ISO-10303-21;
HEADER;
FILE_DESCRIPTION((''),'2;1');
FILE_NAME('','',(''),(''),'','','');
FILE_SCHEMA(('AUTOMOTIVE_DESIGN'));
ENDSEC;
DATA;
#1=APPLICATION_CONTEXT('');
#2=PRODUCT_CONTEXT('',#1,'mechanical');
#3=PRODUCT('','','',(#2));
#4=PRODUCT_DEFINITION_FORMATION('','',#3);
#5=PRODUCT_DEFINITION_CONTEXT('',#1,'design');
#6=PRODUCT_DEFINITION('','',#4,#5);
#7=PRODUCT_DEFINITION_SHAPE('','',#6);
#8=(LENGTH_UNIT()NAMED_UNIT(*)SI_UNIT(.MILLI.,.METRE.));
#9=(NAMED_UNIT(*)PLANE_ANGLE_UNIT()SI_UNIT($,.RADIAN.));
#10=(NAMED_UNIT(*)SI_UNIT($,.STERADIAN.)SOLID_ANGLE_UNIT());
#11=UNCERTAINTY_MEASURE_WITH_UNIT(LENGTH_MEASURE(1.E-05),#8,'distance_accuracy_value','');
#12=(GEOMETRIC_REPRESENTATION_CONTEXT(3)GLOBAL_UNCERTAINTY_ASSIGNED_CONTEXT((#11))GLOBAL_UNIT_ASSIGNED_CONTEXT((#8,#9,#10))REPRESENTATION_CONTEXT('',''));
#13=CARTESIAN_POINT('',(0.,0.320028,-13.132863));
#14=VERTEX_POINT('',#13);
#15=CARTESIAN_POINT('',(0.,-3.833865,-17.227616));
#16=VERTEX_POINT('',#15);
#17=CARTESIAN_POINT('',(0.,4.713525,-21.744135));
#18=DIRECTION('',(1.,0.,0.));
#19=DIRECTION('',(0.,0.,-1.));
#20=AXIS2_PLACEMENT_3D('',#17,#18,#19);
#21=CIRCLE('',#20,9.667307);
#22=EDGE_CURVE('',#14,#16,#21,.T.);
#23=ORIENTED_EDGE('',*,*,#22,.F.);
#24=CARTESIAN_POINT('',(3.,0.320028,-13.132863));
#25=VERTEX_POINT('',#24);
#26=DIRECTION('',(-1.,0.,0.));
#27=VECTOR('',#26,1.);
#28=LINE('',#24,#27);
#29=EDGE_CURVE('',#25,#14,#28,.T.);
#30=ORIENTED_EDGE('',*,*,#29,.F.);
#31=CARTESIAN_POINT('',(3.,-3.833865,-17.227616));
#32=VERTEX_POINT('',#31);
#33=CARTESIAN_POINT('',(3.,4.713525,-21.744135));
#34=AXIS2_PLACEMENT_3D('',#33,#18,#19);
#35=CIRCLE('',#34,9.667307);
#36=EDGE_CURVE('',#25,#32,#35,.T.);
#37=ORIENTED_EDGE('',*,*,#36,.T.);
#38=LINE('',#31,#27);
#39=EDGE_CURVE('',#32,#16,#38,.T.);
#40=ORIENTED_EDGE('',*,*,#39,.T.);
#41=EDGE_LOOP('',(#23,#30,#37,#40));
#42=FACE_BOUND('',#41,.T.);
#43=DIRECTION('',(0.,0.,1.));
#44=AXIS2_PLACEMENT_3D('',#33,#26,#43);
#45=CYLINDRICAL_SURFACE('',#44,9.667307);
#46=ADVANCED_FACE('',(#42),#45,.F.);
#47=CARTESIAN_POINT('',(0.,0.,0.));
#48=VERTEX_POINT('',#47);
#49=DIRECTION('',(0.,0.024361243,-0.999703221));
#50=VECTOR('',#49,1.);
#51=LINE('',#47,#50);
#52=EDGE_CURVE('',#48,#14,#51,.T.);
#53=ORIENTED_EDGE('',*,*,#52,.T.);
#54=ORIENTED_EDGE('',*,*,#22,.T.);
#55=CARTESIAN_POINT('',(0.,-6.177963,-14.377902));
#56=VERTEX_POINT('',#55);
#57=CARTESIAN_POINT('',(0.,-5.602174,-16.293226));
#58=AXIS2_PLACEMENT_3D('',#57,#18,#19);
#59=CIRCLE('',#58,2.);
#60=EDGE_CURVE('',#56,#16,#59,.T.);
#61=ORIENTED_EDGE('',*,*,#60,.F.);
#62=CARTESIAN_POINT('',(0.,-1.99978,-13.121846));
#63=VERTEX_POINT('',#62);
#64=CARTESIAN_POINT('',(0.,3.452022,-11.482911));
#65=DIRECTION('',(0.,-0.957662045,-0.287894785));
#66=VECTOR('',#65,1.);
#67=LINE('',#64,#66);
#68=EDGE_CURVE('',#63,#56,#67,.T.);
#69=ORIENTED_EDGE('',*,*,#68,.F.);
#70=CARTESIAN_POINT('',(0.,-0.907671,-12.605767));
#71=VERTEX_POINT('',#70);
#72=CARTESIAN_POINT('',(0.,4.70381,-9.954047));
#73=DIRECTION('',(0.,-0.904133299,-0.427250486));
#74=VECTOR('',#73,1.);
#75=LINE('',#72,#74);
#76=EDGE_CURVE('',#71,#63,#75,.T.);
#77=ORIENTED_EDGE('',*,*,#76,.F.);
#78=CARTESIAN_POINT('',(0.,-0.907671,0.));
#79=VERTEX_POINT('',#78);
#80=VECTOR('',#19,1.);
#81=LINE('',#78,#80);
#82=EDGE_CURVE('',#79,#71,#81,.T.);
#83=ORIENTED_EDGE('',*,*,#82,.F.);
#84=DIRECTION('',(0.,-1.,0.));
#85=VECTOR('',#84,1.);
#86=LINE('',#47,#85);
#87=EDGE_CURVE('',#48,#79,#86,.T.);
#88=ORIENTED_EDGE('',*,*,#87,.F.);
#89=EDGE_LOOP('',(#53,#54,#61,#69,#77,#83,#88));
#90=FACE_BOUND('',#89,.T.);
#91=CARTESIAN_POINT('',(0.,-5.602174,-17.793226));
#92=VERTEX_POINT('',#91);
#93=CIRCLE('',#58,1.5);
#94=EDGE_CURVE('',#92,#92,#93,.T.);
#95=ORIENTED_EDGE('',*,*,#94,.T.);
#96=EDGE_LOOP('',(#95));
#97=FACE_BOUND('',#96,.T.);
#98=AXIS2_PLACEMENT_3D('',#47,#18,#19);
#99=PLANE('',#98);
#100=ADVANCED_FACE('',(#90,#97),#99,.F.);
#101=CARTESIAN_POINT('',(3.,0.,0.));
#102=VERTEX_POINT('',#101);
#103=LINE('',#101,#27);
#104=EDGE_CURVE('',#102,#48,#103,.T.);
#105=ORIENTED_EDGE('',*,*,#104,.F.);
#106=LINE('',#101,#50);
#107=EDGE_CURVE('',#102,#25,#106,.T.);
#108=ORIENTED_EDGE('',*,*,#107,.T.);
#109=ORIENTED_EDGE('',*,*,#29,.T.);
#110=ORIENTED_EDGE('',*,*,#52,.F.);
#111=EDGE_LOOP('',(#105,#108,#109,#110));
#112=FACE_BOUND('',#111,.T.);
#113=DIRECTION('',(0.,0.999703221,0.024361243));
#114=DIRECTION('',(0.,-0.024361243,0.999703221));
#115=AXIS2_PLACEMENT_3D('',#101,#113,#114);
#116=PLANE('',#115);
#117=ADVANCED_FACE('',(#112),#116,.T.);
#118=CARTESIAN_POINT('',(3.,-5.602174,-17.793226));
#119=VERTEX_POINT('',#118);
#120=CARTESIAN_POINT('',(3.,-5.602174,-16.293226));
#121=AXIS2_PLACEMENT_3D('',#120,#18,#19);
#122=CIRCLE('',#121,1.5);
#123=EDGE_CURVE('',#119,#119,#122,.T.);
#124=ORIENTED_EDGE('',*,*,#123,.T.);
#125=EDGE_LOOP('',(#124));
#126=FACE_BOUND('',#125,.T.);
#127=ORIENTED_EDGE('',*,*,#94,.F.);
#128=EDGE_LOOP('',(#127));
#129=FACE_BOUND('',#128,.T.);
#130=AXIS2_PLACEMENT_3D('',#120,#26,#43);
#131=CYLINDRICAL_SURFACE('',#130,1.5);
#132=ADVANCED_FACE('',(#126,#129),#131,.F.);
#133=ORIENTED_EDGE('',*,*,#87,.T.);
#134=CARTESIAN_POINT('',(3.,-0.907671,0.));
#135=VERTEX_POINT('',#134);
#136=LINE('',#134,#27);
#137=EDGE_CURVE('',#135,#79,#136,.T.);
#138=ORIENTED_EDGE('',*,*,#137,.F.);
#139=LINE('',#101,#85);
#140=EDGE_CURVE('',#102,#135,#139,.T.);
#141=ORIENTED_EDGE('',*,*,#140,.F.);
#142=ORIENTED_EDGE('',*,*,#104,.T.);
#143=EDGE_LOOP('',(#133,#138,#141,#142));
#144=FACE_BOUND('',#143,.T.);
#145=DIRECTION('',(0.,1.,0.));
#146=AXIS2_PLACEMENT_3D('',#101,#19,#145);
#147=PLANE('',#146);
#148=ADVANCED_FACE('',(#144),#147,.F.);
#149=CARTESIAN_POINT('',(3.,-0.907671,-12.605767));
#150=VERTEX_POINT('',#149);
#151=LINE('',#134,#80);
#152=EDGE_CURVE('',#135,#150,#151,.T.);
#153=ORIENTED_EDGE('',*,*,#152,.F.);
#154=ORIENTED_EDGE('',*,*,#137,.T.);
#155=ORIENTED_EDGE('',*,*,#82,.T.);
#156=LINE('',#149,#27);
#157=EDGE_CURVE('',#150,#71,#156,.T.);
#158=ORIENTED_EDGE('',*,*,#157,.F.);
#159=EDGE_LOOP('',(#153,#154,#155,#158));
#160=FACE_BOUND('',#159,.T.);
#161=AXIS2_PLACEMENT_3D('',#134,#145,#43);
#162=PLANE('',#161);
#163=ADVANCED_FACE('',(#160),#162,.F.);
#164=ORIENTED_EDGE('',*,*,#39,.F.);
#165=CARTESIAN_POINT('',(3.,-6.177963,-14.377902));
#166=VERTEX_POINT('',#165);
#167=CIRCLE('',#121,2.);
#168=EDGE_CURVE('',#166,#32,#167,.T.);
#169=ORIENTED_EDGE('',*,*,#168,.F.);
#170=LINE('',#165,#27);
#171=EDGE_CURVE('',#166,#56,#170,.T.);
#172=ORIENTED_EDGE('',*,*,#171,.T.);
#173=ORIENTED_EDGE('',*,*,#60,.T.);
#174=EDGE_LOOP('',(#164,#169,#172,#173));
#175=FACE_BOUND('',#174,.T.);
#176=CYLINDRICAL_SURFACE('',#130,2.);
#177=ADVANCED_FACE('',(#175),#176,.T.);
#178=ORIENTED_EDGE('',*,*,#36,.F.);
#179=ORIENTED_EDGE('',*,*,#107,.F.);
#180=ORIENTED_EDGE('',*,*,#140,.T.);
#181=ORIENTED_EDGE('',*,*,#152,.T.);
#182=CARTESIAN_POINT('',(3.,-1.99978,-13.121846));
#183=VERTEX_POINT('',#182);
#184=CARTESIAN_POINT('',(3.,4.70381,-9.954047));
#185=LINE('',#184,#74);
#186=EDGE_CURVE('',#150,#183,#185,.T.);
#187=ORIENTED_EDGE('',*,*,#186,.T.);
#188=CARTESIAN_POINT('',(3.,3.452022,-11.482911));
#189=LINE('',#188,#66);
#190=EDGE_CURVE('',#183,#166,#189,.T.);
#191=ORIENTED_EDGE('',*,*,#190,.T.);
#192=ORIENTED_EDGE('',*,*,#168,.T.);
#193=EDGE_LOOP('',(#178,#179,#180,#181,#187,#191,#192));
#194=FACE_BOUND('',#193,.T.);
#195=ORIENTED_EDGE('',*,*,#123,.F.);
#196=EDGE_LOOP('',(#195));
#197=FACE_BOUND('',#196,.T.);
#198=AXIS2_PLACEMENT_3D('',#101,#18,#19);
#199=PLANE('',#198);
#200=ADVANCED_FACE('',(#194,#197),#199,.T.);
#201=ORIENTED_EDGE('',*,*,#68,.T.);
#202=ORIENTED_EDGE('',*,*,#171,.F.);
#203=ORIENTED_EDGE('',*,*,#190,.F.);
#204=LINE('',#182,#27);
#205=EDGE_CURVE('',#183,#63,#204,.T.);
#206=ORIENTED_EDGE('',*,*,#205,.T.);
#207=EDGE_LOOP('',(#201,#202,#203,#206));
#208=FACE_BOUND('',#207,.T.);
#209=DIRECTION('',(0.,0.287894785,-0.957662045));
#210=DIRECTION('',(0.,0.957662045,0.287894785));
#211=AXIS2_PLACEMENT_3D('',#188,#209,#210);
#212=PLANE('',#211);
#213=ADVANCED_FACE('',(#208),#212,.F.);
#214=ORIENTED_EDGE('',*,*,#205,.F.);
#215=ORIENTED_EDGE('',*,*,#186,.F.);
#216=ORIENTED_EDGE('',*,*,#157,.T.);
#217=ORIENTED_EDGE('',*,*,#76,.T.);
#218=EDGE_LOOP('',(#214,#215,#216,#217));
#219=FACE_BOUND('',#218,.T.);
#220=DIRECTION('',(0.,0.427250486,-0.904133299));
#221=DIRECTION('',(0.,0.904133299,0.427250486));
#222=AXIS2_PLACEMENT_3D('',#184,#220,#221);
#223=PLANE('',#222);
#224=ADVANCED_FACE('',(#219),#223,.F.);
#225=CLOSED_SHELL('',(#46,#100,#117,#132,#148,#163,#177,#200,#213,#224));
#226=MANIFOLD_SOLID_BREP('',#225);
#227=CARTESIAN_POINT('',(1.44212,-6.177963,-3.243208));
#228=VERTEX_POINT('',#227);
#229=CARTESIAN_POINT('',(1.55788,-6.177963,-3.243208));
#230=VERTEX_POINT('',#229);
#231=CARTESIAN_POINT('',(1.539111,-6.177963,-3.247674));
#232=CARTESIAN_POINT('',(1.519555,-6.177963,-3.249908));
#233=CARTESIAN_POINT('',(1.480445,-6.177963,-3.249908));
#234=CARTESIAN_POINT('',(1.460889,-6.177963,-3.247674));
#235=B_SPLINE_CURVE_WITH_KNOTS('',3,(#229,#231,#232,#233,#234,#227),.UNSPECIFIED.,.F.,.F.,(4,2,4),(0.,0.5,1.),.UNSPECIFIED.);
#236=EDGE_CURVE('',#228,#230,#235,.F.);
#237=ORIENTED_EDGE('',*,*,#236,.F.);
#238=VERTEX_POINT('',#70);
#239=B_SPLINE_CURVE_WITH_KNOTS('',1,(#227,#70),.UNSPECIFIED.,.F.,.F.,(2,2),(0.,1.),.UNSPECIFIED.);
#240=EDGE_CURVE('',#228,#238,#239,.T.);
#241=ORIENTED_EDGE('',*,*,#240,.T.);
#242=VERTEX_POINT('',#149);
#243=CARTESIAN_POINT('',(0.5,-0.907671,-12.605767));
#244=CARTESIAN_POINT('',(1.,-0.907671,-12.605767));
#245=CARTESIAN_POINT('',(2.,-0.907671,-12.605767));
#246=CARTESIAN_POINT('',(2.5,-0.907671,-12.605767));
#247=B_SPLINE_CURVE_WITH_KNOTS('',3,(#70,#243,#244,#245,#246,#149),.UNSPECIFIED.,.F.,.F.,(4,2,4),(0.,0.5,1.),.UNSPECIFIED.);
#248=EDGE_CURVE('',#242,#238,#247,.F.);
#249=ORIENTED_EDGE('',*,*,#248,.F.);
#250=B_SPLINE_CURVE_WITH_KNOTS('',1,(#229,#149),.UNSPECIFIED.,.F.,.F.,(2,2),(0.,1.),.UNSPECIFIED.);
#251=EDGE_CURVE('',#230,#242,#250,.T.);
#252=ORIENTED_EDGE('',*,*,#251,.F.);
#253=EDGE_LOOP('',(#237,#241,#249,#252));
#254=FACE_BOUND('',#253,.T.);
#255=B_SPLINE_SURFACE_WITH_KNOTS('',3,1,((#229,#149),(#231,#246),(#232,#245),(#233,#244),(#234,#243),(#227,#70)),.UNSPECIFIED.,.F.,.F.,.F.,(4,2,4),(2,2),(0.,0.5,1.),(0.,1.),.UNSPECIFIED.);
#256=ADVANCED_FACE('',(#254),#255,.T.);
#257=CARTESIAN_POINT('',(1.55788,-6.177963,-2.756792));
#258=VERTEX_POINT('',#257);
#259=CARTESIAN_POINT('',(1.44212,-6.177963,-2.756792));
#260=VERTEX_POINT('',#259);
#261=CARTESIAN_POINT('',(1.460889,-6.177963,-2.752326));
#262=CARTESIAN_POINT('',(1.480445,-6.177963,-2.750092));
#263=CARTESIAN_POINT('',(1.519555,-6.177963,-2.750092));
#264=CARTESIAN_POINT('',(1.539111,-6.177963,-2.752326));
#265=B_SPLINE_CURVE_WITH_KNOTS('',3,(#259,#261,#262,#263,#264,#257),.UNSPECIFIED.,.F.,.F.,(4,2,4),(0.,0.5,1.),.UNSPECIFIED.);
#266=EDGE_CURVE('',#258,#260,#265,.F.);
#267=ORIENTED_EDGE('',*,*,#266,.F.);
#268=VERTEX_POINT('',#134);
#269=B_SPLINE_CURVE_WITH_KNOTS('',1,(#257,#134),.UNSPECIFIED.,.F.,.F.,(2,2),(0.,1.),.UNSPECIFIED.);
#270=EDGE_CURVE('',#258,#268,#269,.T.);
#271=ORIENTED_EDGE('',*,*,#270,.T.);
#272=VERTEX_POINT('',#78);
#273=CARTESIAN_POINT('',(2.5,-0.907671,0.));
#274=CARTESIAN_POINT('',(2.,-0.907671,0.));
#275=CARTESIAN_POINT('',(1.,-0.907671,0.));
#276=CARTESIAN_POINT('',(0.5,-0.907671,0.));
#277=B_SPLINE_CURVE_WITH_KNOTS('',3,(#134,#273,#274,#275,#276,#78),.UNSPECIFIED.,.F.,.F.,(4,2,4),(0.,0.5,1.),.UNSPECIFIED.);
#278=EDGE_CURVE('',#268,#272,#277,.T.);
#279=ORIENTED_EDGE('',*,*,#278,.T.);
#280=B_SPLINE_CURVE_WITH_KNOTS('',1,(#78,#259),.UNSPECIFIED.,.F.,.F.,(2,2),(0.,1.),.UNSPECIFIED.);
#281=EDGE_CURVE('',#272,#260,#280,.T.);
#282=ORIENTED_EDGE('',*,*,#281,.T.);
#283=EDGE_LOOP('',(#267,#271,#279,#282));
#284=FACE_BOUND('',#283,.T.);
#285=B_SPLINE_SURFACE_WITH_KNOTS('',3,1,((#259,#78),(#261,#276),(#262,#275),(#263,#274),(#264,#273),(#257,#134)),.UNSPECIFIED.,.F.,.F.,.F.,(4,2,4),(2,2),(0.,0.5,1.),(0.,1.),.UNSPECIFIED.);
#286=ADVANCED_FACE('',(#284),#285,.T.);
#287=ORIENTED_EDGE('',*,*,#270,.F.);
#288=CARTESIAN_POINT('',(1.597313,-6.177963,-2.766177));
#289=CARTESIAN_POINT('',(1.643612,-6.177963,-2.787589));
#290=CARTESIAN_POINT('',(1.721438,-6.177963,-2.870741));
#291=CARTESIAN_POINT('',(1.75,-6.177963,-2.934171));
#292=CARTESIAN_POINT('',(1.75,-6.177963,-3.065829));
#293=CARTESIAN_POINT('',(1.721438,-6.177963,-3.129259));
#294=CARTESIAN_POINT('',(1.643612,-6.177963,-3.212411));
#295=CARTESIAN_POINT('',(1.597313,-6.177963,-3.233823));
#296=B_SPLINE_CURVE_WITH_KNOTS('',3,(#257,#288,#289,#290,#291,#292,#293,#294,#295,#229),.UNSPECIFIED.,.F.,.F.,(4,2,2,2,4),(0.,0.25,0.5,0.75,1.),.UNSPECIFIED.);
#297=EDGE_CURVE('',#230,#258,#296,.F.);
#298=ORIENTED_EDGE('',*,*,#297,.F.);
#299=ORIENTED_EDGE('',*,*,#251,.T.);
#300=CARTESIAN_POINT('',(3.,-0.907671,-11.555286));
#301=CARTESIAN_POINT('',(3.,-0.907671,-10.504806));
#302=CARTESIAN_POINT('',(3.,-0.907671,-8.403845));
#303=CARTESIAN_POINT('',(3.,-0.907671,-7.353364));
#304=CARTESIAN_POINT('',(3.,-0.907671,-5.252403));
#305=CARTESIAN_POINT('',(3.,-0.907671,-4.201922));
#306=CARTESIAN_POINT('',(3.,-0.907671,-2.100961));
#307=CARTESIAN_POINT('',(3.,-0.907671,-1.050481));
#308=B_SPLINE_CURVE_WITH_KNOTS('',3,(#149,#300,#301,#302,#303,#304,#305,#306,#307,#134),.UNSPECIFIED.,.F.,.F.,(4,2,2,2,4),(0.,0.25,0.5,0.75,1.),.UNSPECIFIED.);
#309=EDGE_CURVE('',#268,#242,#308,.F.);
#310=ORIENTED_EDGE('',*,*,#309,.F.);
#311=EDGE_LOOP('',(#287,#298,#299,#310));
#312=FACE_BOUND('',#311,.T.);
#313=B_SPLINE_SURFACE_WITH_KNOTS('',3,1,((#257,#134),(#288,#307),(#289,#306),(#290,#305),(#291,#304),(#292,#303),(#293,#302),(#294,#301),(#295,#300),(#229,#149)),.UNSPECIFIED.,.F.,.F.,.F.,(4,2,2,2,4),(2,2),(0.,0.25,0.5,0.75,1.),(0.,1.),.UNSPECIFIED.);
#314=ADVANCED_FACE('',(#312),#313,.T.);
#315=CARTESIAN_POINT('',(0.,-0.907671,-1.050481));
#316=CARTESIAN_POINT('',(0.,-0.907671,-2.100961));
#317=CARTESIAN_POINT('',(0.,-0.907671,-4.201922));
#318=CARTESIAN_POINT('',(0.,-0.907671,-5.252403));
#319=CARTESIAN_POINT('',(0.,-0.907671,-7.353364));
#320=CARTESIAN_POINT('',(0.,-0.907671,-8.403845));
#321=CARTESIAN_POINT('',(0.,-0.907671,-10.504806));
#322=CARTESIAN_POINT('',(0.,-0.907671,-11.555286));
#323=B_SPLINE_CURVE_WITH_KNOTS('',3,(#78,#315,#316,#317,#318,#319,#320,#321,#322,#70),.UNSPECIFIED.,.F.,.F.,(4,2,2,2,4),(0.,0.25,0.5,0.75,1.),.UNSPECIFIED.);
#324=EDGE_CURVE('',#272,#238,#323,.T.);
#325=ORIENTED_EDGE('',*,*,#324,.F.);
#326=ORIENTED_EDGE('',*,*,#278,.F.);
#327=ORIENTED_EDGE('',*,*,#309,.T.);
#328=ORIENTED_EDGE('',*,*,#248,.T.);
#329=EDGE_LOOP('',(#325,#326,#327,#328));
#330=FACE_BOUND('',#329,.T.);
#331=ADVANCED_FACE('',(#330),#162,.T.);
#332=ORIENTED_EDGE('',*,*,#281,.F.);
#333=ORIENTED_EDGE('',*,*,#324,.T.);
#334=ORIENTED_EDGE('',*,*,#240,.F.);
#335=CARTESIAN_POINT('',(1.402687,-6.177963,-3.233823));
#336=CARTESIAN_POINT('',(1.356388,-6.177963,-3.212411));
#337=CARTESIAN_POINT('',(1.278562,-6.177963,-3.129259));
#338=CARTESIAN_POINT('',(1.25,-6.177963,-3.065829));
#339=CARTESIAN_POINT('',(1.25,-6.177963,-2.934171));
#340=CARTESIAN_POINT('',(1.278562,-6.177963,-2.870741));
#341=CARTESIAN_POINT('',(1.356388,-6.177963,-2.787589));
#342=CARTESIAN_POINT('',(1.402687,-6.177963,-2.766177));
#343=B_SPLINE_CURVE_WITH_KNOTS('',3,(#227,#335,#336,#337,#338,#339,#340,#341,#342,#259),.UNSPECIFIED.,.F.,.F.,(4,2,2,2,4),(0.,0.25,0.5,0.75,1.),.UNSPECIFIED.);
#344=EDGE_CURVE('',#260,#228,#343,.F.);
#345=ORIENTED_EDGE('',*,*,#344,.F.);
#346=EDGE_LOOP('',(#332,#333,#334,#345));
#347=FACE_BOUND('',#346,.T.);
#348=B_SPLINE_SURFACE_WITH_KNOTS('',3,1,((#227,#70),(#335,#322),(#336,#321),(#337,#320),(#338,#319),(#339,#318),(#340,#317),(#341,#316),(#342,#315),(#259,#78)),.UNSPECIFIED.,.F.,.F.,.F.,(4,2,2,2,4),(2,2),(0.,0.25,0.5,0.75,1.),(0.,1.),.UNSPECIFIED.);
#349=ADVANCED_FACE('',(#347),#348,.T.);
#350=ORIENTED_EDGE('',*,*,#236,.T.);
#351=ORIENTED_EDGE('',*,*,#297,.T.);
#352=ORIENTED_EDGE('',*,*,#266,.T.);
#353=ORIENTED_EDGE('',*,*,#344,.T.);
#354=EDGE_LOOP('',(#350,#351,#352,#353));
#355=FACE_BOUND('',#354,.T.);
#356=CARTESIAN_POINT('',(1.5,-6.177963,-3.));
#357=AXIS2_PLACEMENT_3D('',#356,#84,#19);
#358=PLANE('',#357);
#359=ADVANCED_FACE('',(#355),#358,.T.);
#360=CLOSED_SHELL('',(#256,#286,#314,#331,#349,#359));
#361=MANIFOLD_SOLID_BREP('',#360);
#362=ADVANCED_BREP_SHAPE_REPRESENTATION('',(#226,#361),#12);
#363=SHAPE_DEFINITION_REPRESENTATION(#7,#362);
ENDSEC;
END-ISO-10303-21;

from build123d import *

# Parameters (mm, degrees)
SKETCH8_R           = 2
SKETCH8_R_2         = 1.5
BOSS_EXTRUDE3_DEPTH = 3


with BuildPart() as part:
    # Sketch8 → Boss-Extrude3 (new body)
    # profile 1 of 2: a face of its own
    with BuildSketch(Plane(origin=(0, 0, 0), x_dir=(0, 0, -1), z_dir=(1, 0, 0))):
        with BuildLine():
            Line((13.132863069, 0.320027848), (0, 0))
            Line((0, 0), (0, -0.907670556))
            Line((0, -0.907670556), (7.174444166, -0.907670556))
            Line((7.174444166, -0.907670556), (12.605766771, -0.907670556))
            Line((12.605766771, -0.907670556), (13.12184584, -1.999779955))
            Line((13.12184584, -1.999779955), (14.377901927, -6.177963459))
            ThreePointArc((14.377901927, -6.177963459), (15.022692005, -4.057588727), (17.227616297, -3.83386543))
            ThreePointArc((17.227616297, -3.83386543), (14.859483295, -2.073108487), (13.132863069, 0.320027848))
        make_face()
    # profile 2 of 2: a face of its own
    with BuildSketch(Plane(origin=(0, 0, 0), x_dir=(0, 0, -1), z_dir=(1, 0, 0))):
        with Locations((16.293226017, -5.602173889)):
            Circle(SKETCH8_R)
        with Locations((16.293226017, -5.602173889)):
            Circle(SKETCH8_R_2, mode=Mode.SUBTRACT)
    extrude(amount=BOSS_EXTRUDE3_DEPTH)


with BuildPart() as body_2:
    # Loft2: read off the stored shape, not the designer's step
    # Loft2: loft between two sections, ruled curve by curve
    loft2_from = [
        Edge.make_bspline([(1.442119938, -6.177963459, -2.756792479), (1.460889093, -6.177963459, -2.752325677), (1.480444547, -6.177963459, -2.750092276), (1.519555453, -6.177963459, -2.750092276), (1.539110907, -6.177963459, -2.752325677), (1.557880062, -6.177963459, -2.756792479)], [0, 0, 0, 0, 0.5, 0.5, 1, 1, 1, 1], 3),
        Edge.make_bspline([(1.557880062, -6.177963459, -2.756792479), (1.597313328, -6.177963459, -2.766177056), (1.643612327, -6.177963459, -2.787589475), (1.721437888, -6.177963459, -2.870740595), (1.75, -6.177963459, -2.934171465), (1.75, -6.177963459, -3.065828535), (1.721437888, -6.177963459, -3.129259405), (1.643612327, -6.177963459, -3.212410525), (1.597313328, -6.177963459, -3.233822944), (1.557880062, -6.177963459, -3.243207521)], [0, 0, 0, 0, 0.25, 0.25, 0.5, 0.5, 0.75, 0.75, 1, 1, 1, 1], 3),
        Edge.make_bspline([(1.442119938, -6.177963459, -3.243207521), (1.402686672, -6.177963459, -3.233822944), (1.356387673, -6.177963459, -3.212410525), (1.278562112, -6.177963459, -3.129259405), (1.25, -6.177963459, -3.065828535), (1.25, -6.177963459, -2.934171465), (1.278562112, -6.177963459, -2.870740595), (1.356387673, -6.177963459, -2.787589475), (1.402686672, -6.177963459, -2.766177056), (1.442119938, -6.177963459, -2.756792479)], [0, 0, 0, 0, 0.25, 0.25, 0.5, 0.5, 0.75, 0.75, 1, 1, 1, 1], 3),
        Edge.make_bspline([(1.557880062, -6.177963459, -3.243207521), (1.539110907, -6.177963459, -3.247674323), (1.519555453, -6.177963459, -3.249907724), (1.480444547, -6.177963459, -3.249907724), (1.460889093, -6.177963459, -3.247674323), (1.442119938, -6.177963459, -3.243207521)], [0, 0, 0, 0, 0.5, 0.5, 1, 1, 1, 1], 3),
    ]
    loft2_to = [
        Edge.make_bspline([(0, -0.907670556, 0), (0.5, -0.907670556, 0), (1, -0.907670556, 0), (2, -0.907670556, 0), (2.5, -0.907670556, 0), (3, -0.907670556, 0)], [0, 0, 0, 0, 0.5, 0.5, 1, 1, 1, 1], 3),
        Edge.make_bspline([(3, -0.907670556, 0), (3, -0.907670556, -1.050480564), (3, -0.907670556, -2.100961129), (3, -0.907670556, -4.201922257), (3, -0.907670556, -5.252402821), (3, -0.907670556, -7.35336395), (3, -0.907670556, -8.403844514), (3, -0.907670556, -10.504805643), (3, -0.907670556, -11.555286207), (3, -0.907670556, -12.605766771)], [0, 0, 0, 0, 0.25, 0.25, 0.5, 0.5, 0.75, 0.75, 1, 1, 1, 1], 3),
        Edge.make_bspline([(0, -0.907670556, -12.605766771), (0, -0.907670556, -11.555286207), (0, -0.907670556, -10.504805643), (0, -0.907670556, -8.403844514), (0, -0.907670556, -7.35336395), (0, -0.907670556, -5.252402821), (0, -0.907670556, -4.201922257), (0, -0.907670556, -2.100961129), (0, -0.907670556, -1.050480564), (0, -0.907670556, 0)], [0, 0, 0, 0, 0.25, 0.25, 0.5, 0.5, 0.75, 0.75, 1, 1, 1, 1], 3),
        Edge.make_bspline([(3, -0.907670556, -12.605766771), (2.5, -0.907670556, -12.605766771), (2, -0.907670556, -12.605766771), (1, -0.907670556, -12.605766771), (0.5, -0.907670556, -12.605766771), (0, -0.907670556, -12.605766771)], [0, 0, 0, 0, 0.5, 0.5, 1, 1, 1, 1], 3),
    ]
    loft2 = Solid(Shell([*[Face.make_surface_from_curves(loft2_from[k], loft2_to[k]) for k in range(4)], Face(Wire(loft2_from)), Face(Wire(loft2_to))]))
    add(loft2)


solid = Compound([part.part, body_2.part])
